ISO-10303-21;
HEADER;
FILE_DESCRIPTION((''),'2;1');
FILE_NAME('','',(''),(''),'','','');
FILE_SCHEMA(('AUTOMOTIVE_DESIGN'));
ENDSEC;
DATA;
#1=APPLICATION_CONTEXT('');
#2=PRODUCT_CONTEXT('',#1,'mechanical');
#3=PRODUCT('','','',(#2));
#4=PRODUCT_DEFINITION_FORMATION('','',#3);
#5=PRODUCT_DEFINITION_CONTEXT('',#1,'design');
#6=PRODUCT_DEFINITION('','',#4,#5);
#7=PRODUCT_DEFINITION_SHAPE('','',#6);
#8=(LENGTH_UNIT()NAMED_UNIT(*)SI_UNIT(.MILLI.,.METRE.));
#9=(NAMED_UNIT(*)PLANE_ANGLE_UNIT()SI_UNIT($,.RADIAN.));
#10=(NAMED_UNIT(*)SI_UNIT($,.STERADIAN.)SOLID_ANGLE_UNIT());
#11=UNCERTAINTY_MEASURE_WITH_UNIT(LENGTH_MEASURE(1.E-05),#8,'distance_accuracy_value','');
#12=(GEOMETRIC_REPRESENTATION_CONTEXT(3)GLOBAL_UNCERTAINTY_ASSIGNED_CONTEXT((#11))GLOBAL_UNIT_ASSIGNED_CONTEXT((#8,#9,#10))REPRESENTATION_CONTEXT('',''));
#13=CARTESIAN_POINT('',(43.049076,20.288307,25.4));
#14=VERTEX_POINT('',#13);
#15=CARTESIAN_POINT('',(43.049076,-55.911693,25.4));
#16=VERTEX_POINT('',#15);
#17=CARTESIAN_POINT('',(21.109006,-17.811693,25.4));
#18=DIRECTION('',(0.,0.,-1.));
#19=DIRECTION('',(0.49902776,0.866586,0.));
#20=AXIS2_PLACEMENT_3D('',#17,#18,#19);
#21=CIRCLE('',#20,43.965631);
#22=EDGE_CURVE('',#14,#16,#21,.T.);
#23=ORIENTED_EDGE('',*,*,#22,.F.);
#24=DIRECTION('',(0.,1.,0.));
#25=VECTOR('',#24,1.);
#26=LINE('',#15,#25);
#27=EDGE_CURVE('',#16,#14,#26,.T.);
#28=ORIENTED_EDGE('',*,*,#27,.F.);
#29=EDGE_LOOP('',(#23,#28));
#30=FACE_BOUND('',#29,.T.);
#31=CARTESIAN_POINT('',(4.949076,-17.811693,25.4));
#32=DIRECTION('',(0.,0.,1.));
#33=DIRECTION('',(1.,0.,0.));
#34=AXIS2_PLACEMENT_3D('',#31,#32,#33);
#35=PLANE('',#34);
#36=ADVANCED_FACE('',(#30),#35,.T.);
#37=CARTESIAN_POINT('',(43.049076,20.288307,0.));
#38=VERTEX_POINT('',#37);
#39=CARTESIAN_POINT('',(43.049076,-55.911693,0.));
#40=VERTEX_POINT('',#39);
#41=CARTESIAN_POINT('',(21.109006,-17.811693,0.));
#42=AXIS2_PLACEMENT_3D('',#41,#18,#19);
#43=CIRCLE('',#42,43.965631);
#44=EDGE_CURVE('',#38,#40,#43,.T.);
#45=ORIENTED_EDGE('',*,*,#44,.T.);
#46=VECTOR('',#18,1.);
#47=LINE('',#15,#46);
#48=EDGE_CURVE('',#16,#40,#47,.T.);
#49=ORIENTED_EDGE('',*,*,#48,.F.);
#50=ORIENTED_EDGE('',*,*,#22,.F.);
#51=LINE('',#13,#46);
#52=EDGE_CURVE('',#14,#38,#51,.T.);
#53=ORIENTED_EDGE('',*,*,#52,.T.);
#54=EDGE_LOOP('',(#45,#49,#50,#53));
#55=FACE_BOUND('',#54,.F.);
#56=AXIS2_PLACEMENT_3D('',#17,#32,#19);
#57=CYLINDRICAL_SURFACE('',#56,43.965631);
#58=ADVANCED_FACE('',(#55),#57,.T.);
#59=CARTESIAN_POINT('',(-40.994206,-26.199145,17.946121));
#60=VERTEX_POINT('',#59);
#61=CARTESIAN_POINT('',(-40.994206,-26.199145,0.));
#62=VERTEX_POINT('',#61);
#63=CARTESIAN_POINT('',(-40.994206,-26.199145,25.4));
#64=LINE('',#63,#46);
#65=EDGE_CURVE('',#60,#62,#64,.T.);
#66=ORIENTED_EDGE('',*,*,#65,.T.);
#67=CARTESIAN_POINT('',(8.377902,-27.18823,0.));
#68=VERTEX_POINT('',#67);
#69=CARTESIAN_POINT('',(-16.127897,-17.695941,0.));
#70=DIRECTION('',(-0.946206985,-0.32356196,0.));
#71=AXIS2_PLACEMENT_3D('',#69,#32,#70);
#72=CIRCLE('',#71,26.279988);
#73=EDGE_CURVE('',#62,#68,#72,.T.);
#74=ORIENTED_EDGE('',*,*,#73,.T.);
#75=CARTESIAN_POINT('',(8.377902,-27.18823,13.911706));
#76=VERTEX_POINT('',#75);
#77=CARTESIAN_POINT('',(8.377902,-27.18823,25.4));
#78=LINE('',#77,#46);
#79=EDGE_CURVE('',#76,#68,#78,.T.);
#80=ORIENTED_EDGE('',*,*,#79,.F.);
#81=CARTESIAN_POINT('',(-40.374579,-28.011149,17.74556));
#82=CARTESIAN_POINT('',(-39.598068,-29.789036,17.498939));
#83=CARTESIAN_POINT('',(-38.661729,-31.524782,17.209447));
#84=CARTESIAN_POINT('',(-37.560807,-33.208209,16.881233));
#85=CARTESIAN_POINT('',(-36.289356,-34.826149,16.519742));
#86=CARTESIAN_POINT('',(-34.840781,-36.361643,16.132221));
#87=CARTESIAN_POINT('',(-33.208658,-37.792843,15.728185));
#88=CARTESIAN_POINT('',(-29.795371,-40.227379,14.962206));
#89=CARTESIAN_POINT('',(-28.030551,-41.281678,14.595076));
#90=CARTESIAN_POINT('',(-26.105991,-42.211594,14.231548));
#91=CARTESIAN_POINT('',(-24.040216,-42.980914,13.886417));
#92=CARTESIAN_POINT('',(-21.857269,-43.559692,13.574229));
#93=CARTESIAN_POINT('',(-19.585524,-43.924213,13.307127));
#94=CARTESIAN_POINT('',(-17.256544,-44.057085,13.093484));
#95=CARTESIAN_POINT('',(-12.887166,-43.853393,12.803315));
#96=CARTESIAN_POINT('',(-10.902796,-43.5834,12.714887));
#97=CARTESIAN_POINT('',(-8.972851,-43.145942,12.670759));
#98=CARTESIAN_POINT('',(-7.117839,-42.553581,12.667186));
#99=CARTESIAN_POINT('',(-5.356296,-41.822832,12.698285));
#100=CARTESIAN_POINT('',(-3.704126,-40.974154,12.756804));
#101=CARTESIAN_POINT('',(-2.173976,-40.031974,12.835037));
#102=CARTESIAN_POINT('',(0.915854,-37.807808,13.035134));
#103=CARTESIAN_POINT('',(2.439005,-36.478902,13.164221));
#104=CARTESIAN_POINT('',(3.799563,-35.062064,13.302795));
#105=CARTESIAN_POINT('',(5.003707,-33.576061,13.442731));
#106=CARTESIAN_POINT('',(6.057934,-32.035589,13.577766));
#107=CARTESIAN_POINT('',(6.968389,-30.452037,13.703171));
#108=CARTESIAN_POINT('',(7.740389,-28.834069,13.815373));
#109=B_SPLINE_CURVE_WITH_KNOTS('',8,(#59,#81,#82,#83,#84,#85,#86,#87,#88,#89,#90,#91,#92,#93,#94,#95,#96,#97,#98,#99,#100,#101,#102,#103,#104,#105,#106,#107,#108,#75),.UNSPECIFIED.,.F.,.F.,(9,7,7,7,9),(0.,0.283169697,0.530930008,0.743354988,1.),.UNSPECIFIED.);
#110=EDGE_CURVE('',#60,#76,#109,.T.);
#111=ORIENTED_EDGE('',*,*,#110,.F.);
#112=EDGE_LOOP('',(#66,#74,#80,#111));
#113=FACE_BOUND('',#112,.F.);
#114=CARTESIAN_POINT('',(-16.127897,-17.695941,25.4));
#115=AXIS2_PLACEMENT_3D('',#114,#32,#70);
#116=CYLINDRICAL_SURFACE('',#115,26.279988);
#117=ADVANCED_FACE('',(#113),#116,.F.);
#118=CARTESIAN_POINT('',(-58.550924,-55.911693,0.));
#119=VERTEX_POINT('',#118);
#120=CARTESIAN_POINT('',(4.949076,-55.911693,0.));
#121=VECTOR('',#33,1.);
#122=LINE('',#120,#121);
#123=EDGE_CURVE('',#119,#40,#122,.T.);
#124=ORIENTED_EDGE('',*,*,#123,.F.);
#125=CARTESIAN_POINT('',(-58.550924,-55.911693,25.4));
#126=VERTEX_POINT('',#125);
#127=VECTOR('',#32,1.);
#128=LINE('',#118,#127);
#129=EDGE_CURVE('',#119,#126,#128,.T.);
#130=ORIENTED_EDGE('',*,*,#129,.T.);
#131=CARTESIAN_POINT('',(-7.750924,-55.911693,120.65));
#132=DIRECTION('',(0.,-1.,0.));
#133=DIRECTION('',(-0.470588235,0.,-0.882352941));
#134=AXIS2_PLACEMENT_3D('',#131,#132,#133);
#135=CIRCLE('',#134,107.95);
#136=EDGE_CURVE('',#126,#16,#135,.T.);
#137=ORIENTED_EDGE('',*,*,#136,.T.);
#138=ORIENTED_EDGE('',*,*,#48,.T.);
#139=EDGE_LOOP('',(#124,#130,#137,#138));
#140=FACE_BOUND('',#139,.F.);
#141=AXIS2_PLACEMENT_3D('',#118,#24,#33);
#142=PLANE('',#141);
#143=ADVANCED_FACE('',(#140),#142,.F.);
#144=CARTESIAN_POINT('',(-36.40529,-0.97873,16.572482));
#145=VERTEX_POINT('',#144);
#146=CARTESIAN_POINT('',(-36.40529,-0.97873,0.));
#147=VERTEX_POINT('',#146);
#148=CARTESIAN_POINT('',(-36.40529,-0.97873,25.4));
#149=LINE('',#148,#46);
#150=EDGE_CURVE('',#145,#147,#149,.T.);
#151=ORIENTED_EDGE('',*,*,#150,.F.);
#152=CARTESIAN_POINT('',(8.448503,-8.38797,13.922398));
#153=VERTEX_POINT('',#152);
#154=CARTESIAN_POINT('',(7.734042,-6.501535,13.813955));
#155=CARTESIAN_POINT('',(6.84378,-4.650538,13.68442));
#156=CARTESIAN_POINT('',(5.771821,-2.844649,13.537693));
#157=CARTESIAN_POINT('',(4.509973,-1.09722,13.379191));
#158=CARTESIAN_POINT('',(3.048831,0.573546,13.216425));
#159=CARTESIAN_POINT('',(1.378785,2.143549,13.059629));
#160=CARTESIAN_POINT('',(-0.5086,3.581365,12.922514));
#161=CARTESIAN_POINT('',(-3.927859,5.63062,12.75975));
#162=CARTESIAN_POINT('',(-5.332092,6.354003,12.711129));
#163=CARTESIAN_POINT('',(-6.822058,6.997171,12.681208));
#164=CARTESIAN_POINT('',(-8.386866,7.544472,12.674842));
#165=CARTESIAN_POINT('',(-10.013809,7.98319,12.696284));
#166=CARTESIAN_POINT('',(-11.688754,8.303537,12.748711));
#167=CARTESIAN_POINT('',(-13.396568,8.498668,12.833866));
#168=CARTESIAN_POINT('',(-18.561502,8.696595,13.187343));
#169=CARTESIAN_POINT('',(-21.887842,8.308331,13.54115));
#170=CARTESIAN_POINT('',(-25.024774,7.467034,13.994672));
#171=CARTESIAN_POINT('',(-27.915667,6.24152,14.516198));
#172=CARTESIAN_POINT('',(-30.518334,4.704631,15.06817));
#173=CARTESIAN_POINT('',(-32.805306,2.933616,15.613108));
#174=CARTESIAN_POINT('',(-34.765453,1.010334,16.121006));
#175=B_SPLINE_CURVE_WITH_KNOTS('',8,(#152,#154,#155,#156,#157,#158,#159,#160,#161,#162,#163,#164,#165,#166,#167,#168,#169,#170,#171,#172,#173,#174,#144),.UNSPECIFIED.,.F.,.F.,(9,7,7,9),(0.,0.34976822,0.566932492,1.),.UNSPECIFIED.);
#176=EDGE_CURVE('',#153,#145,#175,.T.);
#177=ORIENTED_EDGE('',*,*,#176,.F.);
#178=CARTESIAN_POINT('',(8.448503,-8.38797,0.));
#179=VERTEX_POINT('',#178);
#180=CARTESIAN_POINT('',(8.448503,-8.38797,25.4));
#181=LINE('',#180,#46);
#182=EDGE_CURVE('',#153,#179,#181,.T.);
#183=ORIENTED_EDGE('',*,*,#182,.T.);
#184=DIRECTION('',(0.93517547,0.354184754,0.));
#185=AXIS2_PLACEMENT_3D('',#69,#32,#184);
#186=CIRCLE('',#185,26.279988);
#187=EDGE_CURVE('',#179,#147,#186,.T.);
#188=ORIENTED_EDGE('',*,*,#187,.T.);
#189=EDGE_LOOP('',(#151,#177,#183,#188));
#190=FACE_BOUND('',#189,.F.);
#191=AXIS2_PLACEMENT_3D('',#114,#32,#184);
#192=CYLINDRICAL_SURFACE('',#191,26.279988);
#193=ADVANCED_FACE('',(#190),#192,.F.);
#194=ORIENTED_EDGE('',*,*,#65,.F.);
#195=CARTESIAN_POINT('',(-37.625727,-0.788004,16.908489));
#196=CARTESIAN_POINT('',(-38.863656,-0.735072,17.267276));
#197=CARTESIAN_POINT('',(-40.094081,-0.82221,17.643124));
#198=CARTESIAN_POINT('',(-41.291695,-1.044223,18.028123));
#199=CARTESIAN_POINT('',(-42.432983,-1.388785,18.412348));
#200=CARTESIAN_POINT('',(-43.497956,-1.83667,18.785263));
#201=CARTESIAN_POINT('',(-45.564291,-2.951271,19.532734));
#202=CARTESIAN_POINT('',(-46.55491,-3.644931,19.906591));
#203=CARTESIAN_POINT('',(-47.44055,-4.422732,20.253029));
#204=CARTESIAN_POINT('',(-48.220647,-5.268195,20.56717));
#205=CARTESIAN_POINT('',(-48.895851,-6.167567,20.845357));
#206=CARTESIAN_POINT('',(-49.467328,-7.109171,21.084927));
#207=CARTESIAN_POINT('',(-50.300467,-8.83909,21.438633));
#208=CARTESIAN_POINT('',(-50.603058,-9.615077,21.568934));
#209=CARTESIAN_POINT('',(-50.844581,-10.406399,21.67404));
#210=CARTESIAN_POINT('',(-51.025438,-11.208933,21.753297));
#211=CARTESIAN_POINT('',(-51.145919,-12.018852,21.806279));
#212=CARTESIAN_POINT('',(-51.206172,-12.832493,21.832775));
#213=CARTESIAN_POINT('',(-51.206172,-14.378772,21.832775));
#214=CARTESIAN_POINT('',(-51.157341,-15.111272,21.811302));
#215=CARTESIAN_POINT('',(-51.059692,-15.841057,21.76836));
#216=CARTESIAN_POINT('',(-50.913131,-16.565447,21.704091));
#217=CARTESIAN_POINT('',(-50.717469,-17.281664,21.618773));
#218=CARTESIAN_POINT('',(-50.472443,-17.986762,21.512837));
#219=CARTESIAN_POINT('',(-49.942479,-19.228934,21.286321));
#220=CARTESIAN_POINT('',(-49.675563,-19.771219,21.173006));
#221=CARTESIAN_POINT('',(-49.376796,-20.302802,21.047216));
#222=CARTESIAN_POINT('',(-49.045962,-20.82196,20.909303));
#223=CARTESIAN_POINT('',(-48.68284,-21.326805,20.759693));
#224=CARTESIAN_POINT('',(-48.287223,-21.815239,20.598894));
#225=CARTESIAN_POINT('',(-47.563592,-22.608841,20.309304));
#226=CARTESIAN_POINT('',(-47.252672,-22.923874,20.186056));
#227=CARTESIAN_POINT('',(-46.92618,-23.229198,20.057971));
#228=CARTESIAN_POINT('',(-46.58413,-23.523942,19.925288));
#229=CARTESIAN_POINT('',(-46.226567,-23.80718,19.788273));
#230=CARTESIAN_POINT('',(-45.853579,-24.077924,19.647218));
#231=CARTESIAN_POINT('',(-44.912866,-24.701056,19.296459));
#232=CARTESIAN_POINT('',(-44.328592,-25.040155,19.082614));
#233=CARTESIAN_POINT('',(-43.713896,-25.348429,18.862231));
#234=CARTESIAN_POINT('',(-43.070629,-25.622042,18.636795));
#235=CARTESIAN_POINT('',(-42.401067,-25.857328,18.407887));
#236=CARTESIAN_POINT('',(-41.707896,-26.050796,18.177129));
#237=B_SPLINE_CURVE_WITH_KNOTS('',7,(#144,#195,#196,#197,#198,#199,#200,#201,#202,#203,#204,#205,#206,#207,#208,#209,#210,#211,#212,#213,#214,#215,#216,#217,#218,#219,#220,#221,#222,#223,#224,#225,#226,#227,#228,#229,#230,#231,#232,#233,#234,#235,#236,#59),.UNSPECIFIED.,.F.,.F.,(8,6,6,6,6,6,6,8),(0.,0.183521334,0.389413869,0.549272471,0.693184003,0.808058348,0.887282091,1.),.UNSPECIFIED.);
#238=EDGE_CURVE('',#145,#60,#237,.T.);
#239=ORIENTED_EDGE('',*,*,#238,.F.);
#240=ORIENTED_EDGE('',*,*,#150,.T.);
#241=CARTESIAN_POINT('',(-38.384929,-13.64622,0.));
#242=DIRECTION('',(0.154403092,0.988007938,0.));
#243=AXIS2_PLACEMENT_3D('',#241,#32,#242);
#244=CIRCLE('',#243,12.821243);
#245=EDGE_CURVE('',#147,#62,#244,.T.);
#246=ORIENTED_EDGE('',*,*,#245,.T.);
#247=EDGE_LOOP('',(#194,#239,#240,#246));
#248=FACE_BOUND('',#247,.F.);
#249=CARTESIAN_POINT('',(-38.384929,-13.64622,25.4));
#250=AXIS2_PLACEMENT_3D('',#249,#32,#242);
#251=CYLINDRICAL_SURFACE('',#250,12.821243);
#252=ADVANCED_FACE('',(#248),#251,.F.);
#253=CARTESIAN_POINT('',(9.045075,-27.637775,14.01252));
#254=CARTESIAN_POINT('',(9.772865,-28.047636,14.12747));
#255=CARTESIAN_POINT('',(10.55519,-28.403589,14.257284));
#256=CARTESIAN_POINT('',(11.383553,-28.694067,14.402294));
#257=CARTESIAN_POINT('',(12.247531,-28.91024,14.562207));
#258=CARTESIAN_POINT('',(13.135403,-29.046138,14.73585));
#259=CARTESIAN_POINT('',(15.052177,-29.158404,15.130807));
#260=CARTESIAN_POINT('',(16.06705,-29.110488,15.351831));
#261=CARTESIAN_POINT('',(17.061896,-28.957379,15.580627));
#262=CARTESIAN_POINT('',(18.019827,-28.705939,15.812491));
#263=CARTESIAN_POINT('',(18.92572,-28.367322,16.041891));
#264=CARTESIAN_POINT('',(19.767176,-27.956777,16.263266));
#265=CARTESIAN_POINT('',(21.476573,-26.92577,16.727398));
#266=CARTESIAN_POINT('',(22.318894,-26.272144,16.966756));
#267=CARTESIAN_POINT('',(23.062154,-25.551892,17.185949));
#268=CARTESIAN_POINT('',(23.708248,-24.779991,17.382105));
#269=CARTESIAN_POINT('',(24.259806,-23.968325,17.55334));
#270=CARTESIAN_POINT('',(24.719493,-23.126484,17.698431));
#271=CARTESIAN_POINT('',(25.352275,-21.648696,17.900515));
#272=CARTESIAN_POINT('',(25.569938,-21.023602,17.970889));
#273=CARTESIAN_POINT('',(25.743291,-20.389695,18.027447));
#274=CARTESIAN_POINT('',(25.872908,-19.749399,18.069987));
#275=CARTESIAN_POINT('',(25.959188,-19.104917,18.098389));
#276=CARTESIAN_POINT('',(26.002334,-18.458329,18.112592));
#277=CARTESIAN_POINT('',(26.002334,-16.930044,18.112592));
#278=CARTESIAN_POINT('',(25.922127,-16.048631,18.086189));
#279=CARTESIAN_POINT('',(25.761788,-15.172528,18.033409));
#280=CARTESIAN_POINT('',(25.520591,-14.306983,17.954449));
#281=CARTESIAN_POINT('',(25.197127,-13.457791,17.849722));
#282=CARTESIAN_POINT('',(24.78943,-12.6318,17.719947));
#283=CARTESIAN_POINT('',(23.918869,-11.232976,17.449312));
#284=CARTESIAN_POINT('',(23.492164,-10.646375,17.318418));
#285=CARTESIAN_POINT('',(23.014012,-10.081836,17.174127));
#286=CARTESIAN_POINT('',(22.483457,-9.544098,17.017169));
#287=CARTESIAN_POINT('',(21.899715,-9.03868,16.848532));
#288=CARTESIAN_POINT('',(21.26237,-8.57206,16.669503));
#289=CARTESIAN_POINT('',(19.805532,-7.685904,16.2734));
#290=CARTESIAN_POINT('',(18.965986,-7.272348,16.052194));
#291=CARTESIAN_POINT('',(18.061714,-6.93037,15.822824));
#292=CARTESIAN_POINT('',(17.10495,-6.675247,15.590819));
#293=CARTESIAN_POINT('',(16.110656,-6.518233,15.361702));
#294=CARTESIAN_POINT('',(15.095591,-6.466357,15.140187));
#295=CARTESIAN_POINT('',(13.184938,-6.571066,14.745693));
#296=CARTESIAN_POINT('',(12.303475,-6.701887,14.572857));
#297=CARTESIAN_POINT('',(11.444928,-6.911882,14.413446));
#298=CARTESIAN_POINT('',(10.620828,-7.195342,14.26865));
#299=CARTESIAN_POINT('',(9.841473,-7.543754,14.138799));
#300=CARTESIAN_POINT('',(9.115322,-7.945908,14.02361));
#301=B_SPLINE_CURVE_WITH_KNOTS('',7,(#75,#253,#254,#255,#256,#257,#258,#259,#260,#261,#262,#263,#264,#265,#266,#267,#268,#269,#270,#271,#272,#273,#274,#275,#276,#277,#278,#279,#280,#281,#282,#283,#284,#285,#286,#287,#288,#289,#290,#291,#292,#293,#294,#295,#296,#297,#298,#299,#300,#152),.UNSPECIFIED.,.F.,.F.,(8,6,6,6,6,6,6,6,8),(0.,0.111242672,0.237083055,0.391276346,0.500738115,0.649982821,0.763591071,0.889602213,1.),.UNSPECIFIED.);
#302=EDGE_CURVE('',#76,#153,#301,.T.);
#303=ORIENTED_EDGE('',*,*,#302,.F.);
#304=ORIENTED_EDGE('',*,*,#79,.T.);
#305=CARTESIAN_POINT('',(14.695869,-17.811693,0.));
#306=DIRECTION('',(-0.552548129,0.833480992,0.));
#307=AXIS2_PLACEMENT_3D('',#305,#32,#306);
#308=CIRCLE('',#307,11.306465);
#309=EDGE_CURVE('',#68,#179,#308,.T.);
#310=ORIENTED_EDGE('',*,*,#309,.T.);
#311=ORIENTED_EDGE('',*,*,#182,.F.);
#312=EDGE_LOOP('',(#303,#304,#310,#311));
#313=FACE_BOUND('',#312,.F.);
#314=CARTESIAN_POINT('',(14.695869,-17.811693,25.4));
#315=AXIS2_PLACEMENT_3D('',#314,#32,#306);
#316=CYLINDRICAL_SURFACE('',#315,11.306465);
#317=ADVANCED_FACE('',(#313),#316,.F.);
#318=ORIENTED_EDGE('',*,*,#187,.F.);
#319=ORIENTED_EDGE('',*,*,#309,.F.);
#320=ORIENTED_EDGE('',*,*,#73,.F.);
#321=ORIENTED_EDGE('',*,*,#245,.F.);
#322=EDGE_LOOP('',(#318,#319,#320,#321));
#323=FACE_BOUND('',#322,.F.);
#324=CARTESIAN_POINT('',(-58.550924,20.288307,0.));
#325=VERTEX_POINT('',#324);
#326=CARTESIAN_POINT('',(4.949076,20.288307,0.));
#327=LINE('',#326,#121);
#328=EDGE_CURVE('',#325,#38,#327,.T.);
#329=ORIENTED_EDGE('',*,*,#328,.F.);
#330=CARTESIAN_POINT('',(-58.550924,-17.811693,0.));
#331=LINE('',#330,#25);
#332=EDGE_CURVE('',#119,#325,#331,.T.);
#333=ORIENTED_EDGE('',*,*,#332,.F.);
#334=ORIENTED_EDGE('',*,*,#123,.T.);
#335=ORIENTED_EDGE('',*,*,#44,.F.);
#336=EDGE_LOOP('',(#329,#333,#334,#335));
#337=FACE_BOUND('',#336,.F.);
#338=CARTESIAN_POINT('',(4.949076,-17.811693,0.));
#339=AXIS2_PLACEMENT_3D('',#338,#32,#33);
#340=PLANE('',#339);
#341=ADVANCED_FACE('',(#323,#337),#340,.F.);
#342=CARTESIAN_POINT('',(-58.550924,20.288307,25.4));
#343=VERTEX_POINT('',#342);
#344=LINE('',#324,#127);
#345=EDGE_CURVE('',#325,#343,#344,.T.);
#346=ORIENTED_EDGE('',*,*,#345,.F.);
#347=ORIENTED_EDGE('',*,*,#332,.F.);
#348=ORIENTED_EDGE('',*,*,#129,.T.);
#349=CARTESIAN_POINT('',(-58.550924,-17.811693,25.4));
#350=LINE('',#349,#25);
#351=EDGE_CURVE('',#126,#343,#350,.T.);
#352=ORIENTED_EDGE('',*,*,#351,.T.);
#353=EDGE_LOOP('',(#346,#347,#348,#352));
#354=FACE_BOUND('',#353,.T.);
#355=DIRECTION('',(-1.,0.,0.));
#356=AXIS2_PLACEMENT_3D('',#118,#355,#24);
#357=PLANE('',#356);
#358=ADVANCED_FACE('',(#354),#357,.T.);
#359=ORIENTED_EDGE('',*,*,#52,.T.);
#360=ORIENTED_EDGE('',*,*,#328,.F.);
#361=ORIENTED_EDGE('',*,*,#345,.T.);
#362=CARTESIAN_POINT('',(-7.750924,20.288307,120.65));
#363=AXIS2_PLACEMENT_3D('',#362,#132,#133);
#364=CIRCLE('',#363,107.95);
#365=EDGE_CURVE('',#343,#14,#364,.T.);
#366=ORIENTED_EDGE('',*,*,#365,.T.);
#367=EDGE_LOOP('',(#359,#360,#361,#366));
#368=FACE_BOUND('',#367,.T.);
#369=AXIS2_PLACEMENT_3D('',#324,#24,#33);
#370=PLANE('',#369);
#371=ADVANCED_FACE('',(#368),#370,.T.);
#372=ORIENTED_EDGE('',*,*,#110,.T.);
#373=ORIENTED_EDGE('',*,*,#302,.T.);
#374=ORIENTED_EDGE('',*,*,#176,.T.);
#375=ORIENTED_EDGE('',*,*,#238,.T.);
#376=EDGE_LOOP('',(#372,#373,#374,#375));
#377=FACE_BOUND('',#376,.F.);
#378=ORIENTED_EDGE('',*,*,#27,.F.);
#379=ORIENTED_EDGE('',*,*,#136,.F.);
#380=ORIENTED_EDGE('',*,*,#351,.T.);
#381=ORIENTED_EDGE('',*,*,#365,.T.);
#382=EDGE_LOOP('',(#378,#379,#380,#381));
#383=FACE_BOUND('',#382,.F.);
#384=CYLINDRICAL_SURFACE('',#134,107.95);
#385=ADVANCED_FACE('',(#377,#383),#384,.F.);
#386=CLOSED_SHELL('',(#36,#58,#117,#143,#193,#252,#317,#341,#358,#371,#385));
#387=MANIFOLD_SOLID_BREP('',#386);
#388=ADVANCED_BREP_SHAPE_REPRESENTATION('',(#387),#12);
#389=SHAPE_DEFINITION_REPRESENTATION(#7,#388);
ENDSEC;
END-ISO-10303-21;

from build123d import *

# Parameters (mm, degrees)
F0_W     = 127
F0_H     = 76.2
F1_DEPTH = 25.4
F3_DEPTH = 25.4
F5_DEPTH = 25.4
F7_DEPTH = 94.22763


# Not quite as in the source:
# - a feature names something its author has since deleted; it is built from what else it names


with BuildPart() as f1:
    # F0 (on Top) → F1 (new body)
    with BuildSketch(Plane.XY):
        with Locations((4.9490761012, -17.8116933908)):
            Rectangle(F0_W, F0_H)
    extrude(amount=F1_DEPTH)

    # F2 (on face) → F3 (cut)
    with BuildSketch(Plane.XY.offset(25.4)):
        with BuildLine():
            Line((43.0490761012, -55.9116933908), (68.4490761012, -55.9116933908))
            Line((68.4490761012, -55.9116933908), (68.4490761012, -17.8116933908))
            Line((68.4490761012, -17.8116933908), (68.4490761012, 20.2883066092))
            Line((68.4490761012, 20.2883066092), (43.0490761012, 20.2883066092))
            ThreePointArc((43.0490761012, 20.2883066092), (65.0746365727, -17.8116933908), (43.0490761012, -55.9116933908))
        make_face()
    extrude(amount=-F3_DEPTH, mode=Mode.SUBTRACT)

    # F4 (on face) → F5 (cut)
    with BuildSketch(Plane.XY.offset(25.4)):
        with BuildLine():
            ThreePointArc((8.3779023105, -27.1882303593), (20.0063433992, -27.7934270204), (26.0023336343, -17.8116933908))
            ThreePointArc((26.0023336343, -17.8116933908), (20.0437900528, -7.8499724051), (8.4485028496, -8.387969882))
            ThreePointArc((8.4485028496, -8.387969882), (9.7226855998, -12.9646479051), (10.1520907288, -17.695941031))
            ThreePointArc((10.1520907288, -17.695941031), (9.7047360462, -22.5242766975), (8.3779023105, -27.1882303593))
        make_face()
        with BuildLine():
            ThreePointArc((10.1520907288, -17.695941031), (9.7226855998, -12.9646479051), (8.4485028496, -8.387969882))
            ThreePointArc((8.4485028496, -8.387969882), (3.3894837429, -17.7692345704), (8.3779023105, -27.1882303593))
            ThreePointArc((8.3779023105, -27.1882303593), (9.7047360462, -22.5242766975), (10.1520907288, -17.695941031))
        make_face()
        with BuildLine():
            ThreePointArc((8.3779023105, -27.1882303593), (3.3894837429, -17.7692345704), (8.4485028496, -8.387969882))
            ThreePointArc((8.4485028496, -8.387969882), (-11.8448406538, 8.2326764046), (-36.4052897795, -0.9787302349))
            ThreePointArc((-36.4052897795, -0.9787302349), (-28.6441463529, -5.3094690784), (-25.5636865376, -13.646219857))
            ThreePointArc((-25.5636865376, -13.646219857), (-30.2938818163, -23.5920338801), (-40.9942057814, -26.1991454999))
            ThreePointArc((-40.9942057814, -26.1991454999), (-16.6542659577, -43.9706572732), (8.3779023105, -27.1882303593))
        make_face()
        with BuildLine():
            ThreePointArc((-40.9942057814, -26.1991454999), (-41.9833758583, -12.9914737388), (-36.4052897795, -0.9787302349))
            ThreePointArc((-36.4052897795, -0.9787302349), (-50.9990660995, -11.3510469345), (-40.9942057814, -26.1991454999))
        make_face()
        with BuildLine():
            ThreePointArc((-25.5636865376, -13.646219857), (-28.6441463529, -5.3094690784), (-36.4052897795, -0.9787302349))
            ThreePointArc((-36.4052897795, -0.9787302349), (-41.9833758583, -12.9914737388), (-40.9942057814, -26.1991454999))
            ThreePointArc((-40.9942057814, -26.1991454999), (-30.2938818163, -23.5920338801), (-25.5636865376, -13.646219857))
        make_face()
    extrude(amount=-F5_DEPTH, mode=Mode.SUBTRACT)

    # F6 (on face) → F7 (cut)
    with BuildSketch(Plane.XZ.offset(55.9116933908)):
        with BuildLine():
            Line((43.0490761012, 25.4), (-58.5509238988, 25.4))
            ThreePointArc((-58.5509238988, 25.4), (-7.7509238988, 12.7), (43.0490761012, 25.4))
        make_face()
    extrude(amount=-F7_DEPTH, mode=Mode.SUBTRACT)


solid = f1.part
